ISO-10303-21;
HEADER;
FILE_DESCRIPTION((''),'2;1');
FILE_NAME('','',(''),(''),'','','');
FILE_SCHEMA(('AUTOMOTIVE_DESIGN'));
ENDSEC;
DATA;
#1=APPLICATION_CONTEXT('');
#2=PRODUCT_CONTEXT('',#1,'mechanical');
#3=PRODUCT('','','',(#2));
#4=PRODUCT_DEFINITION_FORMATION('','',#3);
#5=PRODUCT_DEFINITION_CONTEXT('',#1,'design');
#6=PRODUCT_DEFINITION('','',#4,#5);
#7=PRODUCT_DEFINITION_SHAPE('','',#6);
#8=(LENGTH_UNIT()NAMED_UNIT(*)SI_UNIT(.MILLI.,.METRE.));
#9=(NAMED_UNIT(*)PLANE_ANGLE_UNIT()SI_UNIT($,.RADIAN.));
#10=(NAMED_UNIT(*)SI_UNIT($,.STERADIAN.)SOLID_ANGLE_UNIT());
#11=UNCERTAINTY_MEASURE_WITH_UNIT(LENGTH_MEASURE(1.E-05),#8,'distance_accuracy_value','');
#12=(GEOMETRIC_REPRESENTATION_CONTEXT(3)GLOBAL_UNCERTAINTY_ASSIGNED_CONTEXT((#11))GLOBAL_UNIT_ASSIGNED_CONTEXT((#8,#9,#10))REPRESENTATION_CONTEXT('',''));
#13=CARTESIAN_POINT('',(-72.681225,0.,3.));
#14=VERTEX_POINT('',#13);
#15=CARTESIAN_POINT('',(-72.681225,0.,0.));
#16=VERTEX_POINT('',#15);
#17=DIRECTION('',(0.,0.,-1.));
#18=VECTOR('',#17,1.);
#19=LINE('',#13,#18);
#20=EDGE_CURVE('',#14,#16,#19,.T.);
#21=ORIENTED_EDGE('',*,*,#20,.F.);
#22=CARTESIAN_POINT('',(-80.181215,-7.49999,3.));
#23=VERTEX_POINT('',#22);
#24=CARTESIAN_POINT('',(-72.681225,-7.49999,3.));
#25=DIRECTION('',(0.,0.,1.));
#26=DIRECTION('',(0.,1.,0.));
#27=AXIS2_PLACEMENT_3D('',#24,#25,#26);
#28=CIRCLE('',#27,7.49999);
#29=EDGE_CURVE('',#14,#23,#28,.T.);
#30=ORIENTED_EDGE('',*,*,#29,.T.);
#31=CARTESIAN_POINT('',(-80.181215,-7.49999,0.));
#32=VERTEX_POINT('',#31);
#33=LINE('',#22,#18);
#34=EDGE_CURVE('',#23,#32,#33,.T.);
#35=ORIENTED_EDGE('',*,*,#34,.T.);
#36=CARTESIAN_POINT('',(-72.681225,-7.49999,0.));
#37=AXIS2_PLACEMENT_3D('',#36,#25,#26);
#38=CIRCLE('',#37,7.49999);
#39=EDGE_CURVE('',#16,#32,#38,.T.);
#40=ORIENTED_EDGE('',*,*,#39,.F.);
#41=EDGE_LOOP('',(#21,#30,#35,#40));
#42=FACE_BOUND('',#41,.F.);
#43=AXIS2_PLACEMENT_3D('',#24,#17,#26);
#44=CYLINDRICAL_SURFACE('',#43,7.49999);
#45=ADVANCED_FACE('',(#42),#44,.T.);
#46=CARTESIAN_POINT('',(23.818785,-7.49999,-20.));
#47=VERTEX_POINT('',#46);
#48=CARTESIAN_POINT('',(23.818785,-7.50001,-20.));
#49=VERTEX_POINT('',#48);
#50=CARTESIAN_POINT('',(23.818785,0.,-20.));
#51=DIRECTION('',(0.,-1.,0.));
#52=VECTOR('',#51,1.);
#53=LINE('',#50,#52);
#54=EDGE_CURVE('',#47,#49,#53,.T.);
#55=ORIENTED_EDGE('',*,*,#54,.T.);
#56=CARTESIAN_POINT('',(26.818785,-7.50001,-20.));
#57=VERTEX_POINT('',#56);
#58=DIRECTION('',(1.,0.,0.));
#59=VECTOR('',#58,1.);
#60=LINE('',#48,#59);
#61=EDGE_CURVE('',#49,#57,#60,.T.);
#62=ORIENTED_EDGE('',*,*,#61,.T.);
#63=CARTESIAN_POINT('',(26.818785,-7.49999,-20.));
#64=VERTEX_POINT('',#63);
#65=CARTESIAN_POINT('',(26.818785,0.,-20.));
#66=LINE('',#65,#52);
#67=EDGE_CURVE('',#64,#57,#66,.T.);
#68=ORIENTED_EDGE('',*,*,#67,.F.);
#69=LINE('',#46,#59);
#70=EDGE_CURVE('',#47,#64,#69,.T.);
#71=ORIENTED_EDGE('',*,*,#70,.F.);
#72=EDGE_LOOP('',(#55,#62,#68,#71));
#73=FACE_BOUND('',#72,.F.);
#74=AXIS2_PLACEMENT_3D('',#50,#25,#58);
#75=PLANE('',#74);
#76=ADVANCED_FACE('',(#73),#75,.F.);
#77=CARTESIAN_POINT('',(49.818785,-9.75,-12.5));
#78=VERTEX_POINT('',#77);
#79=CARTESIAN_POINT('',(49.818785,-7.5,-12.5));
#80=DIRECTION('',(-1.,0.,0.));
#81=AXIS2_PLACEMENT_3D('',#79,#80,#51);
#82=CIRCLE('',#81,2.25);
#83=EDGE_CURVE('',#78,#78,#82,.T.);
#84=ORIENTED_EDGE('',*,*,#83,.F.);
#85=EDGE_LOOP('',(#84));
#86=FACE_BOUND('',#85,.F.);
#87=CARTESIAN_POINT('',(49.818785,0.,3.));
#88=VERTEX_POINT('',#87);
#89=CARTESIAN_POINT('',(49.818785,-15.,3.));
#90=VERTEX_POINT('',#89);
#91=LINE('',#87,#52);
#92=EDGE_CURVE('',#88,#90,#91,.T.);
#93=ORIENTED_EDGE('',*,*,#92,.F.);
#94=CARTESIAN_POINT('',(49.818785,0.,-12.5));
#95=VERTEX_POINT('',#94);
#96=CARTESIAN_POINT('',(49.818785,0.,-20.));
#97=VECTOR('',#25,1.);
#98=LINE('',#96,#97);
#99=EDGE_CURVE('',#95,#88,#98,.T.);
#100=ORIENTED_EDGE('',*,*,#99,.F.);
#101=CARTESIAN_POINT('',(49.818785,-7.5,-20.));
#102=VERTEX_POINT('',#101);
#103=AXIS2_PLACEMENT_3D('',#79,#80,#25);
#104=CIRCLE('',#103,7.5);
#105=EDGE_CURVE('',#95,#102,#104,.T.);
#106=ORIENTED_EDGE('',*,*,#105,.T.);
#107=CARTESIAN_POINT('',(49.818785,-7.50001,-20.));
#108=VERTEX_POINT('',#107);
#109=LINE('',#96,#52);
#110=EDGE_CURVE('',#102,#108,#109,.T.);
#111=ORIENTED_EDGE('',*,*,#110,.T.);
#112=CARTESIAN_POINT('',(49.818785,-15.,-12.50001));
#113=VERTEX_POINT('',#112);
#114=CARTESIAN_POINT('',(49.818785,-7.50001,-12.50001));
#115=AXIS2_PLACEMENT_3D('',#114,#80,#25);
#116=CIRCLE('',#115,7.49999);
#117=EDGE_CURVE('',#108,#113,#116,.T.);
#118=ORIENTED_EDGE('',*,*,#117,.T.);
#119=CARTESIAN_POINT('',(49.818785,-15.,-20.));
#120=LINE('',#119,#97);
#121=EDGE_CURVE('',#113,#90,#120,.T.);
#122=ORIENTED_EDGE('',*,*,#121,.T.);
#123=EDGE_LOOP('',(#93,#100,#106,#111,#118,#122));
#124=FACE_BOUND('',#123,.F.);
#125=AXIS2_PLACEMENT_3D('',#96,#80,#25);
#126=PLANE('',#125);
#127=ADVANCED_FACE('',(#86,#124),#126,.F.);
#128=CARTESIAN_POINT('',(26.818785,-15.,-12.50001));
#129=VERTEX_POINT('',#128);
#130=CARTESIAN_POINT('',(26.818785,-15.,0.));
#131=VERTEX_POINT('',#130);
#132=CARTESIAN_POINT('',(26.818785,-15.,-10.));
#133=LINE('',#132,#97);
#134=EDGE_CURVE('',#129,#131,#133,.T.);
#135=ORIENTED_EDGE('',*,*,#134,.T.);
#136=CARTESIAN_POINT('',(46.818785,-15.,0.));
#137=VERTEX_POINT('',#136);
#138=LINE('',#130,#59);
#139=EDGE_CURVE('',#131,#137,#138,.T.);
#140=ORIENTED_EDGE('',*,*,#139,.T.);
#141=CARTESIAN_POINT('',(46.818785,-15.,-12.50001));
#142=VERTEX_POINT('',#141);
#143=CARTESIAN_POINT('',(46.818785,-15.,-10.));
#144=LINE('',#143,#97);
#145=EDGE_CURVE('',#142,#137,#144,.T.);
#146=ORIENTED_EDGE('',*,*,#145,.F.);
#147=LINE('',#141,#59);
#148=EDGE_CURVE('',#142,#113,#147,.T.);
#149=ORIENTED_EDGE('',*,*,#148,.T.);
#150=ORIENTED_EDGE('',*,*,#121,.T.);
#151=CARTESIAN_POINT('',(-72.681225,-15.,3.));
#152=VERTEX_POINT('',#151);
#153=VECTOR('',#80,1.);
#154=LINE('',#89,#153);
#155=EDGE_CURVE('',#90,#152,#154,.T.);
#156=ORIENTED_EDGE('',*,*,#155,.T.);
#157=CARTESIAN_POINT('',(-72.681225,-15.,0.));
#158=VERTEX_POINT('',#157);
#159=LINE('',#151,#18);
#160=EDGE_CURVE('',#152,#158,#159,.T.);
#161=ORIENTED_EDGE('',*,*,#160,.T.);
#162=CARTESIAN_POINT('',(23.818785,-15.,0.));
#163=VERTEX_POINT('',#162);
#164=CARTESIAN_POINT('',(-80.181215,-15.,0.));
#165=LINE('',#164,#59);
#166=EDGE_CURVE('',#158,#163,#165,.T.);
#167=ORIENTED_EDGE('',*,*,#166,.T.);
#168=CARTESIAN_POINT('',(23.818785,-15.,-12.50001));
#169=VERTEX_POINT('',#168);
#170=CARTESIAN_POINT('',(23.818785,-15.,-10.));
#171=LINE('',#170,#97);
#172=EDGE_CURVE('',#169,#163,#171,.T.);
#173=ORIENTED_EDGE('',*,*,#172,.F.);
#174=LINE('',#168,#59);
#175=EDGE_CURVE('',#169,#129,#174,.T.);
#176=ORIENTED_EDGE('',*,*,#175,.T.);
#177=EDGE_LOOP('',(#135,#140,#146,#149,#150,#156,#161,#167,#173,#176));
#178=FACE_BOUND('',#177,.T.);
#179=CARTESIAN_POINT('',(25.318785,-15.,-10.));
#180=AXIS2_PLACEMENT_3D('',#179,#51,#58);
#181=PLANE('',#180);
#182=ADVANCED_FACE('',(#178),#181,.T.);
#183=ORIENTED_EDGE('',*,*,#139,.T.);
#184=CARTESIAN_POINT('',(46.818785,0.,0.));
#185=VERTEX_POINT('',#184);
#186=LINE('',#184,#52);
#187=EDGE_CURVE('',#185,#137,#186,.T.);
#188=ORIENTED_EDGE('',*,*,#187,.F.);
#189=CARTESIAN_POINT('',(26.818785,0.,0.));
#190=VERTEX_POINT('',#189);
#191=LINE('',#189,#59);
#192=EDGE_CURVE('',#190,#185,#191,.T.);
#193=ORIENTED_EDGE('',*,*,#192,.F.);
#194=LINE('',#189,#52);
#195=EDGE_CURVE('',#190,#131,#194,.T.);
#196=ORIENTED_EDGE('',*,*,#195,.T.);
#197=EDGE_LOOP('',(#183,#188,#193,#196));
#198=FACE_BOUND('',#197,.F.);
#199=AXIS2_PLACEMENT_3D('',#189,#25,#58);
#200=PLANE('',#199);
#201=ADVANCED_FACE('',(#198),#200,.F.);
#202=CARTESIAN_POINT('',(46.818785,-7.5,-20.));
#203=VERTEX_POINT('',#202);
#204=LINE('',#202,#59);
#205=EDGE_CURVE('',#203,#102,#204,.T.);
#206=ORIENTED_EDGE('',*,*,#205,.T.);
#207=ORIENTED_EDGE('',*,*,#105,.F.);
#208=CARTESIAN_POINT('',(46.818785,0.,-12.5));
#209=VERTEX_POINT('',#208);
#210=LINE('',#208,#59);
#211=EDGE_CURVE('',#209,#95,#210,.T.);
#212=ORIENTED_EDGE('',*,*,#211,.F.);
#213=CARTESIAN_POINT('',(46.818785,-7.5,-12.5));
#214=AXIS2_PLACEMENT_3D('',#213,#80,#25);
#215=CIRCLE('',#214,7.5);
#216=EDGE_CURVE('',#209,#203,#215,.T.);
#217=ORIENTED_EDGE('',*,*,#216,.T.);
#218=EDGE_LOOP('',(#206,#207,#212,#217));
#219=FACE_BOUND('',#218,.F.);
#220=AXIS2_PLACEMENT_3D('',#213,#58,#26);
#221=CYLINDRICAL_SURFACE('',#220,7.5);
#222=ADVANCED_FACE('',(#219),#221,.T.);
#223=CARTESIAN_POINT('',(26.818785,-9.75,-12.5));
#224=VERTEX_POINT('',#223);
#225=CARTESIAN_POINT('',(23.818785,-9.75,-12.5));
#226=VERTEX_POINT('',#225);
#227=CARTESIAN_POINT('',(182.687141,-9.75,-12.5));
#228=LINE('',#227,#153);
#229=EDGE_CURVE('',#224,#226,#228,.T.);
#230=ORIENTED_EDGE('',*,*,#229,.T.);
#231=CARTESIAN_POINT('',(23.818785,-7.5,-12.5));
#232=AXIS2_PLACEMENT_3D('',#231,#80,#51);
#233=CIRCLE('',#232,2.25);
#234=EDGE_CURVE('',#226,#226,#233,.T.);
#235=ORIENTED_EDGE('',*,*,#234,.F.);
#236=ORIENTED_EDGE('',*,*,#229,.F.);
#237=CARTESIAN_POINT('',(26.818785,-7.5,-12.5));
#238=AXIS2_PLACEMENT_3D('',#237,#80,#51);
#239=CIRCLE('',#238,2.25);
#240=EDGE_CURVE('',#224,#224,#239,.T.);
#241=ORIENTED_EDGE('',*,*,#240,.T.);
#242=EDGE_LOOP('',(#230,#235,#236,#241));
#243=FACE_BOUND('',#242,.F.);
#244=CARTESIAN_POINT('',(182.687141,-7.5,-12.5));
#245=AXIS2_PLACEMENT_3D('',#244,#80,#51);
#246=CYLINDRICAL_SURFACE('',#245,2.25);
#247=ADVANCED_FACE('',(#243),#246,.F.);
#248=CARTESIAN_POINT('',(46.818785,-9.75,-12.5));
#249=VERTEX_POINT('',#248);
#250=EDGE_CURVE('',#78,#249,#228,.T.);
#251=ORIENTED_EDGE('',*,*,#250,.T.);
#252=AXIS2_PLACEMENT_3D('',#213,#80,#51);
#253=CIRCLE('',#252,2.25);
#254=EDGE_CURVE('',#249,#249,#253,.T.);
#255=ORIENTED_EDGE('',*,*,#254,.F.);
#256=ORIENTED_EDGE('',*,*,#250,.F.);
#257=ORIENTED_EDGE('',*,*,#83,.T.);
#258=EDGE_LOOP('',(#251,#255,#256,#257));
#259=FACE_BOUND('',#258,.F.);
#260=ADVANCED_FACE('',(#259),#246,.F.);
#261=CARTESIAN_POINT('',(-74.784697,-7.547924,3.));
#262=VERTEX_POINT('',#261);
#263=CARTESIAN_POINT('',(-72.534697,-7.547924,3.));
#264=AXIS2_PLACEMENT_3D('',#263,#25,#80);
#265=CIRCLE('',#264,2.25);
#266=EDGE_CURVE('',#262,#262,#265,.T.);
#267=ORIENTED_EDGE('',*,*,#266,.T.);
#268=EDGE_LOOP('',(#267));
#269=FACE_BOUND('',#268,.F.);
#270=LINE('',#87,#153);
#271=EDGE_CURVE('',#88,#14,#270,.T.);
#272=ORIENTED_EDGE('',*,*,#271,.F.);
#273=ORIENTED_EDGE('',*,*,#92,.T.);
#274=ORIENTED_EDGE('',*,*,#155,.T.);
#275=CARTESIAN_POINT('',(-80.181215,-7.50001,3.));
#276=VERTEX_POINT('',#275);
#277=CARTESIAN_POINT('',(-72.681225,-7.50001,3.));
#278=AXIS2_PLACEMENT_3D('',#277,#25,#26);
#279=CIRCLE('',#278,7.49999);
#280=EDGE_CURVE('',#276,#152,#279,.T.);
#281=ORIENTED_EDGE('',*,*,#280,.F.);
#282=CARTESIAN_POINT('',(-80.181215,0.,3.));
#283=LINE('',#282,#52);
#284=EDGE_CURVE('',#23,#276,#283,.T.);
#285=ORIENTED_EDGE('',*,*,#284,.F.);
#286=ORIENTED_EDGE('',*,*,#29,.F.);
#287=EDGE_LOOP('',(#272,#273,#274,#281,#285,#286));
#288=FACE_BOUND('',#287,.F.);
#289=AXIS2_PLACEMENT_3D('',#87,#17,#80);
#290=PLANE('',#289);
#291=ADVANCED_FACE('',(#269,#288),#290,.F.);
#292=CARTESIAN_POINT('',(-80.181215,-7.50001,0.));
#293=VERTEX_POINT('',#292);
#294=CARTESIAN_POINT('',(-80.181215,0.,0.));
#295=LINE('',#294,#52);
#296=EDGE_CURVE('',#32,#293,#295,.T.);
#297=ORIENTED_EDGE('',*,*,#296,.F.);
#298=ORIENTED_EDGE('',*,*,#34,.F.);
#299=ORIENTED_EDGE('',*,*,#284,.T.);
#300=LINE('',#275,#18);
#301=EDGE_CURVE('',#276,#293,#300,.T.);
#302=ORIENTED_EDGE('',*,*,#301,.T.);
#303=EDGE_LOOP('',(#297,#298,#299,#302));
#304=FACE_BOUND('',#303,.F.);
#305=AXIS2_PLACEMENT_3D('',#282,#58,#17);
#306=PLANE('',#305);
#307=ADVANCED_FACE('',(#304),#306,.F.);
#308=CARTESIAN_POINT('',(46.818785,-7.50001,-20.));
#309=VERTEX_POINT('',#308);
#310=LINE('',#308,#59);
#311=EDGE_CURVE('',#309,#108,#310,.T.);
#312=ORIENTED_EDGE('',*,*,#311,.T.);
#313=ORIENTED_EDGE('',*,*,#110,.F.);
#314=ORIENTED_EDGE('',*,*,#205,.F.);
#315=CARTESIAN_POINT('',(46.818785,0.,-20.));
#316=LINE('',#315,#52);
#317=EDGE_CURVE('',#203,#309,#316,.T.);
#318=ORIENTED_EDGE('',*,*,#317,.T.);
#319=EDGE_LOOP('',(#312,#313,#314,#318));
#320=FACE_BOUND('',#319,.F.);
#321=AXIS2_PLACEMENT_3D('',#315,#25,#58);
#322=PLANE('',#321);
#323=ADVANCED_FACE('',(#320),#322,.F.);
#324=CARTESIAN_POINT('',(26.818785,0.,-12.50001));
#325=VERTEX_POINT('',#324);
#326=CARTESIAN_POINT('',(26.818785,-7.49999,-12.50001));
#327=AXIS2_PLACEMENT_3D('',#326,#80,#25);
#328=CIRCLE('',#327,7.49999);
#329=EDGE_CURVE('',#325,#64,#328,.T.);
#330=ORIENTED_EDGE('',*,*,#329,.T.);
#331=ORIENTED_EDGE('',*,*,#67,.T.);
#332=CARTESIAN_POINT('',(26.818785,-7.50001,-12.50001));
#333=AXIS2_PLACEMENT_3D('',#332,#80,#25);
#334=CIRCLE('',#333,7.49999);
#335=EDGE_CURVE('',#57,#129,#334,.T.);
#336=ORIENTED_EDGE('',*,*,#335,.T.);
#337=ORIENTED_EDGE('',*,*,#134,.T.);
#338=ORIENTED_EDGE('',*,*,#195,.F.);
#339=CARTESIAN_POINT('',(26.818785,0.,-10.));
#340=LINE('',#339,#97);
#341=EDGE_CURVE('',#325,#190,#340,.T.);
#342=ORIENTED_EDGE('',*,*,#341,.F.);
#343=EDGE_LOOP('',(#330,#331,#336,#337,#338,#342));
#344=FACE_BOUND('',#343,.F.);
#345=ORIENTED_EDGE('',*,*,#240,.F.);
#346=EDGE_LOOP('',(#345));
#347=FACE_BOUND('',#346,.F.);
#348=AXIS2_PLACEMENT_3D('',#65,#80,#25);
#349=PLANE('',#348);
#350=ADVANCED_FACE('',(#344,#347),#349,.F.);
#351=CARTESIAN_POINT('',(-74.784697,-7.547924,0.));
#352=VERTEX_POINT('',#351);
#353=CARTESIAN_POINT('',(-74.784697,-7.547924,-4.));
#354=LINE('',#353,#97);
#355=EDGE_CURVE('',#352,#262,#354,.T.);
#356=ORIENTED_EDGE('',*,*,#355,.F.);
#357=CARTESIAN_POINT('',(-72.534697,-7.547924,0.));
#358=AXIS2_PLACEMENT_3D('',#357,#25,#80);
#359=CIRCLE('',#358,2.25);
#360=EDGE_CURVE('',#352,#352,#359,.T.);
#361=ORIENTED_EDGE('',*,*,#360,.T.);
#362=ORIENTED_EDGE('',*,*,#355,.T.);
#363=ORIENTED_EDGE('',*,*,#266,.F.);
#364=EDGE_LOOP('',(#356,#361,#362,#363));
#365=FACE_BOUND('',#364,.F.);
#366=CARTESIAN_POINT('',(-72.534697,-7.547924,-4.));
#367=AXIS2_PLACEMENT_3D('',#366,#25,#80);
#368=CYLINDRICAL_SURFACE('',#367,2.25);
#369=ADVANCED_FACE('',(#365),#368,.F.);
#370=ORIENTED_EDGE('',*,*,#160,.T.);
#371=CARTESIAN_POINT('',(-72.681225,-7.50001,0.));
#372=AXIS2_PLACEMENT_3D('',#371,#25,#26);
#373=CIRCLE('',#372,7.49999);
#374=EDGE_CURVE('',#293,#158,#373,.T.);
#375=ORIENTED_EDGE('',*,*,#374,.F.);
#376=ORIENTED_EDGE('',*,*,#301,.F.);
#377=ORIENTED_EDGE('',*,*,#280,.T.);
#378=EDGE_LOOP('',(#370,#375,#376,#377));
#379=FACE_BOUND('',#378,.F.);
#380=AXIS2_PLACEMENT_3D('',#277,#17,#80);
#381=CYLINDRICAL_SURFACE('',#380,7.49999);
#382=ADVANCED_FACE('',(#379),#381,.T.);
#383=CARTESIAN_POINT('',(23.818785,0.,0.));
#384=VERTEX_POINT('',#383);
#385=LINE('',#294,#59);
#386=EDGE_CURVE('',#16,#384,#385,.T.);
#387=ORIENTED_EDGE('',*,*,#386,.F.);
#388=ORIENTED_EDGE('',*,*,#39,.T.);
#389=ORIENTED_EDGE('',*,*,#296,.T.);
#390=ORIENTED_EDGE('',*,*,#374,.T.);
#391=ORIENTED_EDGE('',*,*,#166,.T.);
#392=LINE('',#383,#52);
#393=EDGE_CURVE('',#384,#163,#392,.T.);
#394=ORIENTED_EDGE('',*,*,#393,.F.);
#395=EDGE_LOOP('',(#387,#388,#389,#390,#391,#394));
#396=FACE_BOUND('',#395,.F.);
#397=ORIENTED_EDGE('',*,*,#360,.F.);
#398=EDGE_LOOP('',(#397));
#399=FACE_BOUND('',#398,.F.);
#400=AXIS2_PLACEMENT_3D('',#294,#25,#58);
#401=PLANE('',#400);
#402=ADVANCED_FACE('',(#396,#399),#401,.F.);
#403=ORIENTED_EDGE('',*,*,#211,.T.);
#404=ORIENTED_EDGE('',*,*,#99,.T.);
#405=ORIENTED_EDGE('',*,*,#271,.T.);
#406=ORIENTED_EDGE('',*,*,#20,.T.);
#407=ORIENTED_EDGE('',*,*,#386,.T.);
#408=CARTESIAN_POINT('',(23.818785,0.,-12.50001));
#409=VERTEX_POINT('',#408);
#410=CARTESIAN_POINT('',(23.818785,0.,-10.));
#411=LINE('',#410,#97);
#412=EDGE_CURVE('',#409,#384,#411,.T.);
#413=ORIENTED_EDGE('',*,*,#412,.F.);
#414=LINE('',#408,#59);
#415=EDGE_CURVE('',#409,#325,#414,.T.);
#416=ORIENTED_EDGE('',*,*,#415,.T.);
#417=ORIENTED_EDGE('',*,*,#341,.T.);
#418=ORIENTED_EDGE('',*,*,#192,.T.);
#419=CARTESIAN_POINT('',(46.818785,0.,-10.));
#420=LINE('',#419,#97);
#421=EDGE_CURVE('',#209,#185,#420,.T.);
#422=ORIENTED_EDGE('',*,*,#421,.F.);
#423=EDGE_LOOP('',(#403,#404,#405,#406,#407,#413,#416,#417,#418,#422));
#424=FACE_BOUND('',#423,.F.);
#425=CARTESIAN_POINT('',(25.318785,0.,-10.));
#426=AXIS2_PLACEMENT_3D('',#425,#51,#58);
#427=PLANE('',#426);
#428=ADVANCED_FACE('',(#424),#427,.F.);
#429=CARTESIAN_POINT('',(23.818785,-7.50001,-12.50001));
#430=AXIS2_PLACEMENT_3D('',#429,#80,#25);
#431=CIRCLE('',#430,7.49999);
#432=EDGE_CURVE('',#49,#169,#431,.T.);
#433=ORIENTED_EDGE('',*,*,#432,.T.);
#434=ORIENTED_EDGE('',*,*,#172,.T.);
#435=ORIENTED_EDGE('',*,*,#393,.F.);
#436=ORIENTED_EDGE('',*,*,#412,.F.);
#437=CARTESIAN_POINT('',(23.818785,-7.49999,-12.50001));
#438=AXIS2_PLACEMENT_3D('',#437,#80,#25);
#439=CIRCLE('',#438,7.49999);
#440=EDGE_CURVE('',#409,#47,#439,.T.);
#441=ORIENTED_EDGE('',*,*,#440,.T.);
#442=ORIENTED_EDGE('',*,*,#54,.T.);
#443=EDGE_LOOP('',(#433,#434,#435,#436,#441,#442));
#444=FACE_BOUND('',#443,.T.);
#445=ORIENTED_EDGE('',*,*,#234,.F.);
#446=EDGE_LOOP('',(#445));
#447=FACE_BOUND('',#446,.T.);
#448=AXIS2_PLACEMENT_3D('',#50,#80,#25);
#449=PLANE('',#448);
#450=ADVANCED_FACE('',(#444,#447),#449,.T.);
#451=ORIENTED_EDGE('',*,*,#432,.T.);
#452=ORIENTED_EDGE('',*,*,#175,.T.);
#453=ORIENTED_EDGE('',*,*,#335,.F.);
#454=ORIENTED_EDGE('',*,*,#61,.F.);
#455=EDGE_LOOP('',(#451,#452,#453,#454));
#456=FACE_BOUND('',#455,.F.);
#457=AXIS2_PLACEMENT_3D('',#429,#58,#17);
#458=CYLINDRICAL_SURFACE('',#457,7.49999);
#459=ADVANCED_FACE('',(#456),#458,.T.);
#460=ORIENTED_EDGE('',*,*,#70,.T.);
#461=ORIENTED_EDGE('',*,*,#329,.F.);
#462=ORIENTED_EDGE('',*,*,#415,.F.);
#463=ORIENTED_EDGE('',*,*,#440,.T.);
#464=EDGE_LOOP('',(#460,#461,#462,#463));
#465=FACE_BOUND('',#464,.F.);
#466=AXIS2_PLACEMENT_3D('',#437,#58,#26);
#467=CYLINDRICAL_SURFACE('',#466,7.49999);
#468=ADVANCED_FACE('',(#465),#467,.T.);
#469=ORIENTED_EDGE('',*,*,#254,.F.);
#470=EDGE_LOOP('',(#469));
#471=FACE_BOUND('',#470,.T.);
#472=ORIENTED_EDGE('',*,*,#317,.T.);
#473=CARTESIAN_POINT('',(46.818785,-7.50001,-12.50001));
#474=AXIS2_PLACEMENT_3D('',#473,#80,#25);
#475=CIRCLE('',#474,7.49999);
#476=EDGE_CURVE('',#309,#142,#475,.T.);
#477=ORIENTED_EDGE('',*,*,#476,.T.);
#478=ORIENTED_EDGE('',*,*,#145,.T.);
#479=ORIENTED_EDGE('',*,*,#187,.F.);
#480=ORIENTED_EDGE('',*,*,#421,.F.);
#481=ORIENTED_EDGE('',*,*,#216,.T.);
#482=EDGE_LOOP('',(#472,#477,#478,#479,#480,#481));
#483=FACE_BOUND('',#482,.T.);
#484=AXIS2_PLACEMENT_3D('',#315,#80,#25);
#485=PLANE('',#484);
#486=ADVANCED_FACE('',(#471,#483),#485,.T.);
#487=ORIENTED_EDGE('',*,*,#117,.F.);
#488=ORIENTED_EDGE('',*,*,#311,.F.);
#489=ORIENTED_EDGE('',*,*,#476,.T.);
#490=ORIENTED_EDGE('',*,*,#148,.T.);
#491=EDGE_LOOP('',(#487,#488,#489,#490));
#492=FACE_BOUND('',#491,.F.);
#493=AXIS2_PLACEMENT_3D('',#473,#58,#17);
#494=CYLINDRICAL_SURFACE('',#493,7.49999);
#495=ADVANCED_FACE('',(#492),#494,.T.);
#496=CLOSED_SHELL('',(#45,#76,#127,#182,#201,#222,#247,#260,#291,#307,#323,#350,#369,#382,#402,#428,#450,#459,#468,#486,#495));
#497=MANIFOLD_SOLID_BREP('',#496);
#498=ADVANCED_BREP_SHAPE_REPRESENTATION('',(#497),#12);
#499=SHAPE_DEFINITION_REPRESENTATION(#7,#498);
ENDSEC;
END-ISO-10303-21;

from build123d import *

# Parameters (mm, degrees)
F0_W     = 3
F0_H     = 20
F1_DEPTH = 15
F3_D     = 4.5
F3_DEPTH = 4
F3_TIP   = 1.3519363928
F5_D     = 4.5
F6_R     = 7.5
F7_R     = 7.49999


# Not quite as in the source:
# - a fillet or chamfer is up to 0.001 mm smaller than in the source, because OpenCascade refuses the exact size


with BuildPart() as f1:
    # F0 (on Front) → F1 (new body)
    with BuildSketch(Plane.XZ):
        with Locations((25.3187853247, -10)):
            Rectangle(F0_W, F0_H)
        with Locations((48.3187853247, -10)):
            Rectangle(F0_W, F0_H)
        Polygon((49.8187853247, 3), (-80.1812146753, 3), (-80.1812146753, 0), (23.8187853247, 0), (26.8187853247, 0), (46.8187853247, 0), (49.8187853247, 0), align=None)
    extrude(amount=F1_DEPTH)

    # F3
    with Locations(Plane(origin=(0, 0, 0), x_dir=(1, 0, 0), z_dir=(0, 0, -1))):
        with Locations((-72.5346971303, 7.5479238294)):
            Hole(F3_D / 2, depth=F3_DEPTH)
            with Locations((0, 0, -(F3_DEPTH + F3_TIP / 2))):  # 118° drill point
                Cone(0, F3_D / 2, F3_TIP, mode=Mode.SUBTRACT)

    # F5 (through all)
    with Locations(Plane.YZ.offset(49.8187853247)):
        with Locations((-7.5, -12.5)):
            Hole(F5_D / 2)

    # F6
    f6_edges = [f1.edges().sort_by_distance(p)[0] for p in [
        (48.318785, 0, -20),
    ]]
    fillet(f6_edges, radius=F6_R)

    # F7 (radius 7.5 in the source; OpenCascade refuses exactly that, so slightly less here)
    f7_edges = [f1.edges().sort_by_distance(p)[0] for p in [
        (25.318785, -15, -20),
        (48.318785, -15, -20),
        (25.318785, 0, -20),
        (-80.181215, 0, 1.5),
        (-80.181215, -15, 1.5),
    ]]
    fillet(f7_edges, radius=F7_R)


solid = f1.part
